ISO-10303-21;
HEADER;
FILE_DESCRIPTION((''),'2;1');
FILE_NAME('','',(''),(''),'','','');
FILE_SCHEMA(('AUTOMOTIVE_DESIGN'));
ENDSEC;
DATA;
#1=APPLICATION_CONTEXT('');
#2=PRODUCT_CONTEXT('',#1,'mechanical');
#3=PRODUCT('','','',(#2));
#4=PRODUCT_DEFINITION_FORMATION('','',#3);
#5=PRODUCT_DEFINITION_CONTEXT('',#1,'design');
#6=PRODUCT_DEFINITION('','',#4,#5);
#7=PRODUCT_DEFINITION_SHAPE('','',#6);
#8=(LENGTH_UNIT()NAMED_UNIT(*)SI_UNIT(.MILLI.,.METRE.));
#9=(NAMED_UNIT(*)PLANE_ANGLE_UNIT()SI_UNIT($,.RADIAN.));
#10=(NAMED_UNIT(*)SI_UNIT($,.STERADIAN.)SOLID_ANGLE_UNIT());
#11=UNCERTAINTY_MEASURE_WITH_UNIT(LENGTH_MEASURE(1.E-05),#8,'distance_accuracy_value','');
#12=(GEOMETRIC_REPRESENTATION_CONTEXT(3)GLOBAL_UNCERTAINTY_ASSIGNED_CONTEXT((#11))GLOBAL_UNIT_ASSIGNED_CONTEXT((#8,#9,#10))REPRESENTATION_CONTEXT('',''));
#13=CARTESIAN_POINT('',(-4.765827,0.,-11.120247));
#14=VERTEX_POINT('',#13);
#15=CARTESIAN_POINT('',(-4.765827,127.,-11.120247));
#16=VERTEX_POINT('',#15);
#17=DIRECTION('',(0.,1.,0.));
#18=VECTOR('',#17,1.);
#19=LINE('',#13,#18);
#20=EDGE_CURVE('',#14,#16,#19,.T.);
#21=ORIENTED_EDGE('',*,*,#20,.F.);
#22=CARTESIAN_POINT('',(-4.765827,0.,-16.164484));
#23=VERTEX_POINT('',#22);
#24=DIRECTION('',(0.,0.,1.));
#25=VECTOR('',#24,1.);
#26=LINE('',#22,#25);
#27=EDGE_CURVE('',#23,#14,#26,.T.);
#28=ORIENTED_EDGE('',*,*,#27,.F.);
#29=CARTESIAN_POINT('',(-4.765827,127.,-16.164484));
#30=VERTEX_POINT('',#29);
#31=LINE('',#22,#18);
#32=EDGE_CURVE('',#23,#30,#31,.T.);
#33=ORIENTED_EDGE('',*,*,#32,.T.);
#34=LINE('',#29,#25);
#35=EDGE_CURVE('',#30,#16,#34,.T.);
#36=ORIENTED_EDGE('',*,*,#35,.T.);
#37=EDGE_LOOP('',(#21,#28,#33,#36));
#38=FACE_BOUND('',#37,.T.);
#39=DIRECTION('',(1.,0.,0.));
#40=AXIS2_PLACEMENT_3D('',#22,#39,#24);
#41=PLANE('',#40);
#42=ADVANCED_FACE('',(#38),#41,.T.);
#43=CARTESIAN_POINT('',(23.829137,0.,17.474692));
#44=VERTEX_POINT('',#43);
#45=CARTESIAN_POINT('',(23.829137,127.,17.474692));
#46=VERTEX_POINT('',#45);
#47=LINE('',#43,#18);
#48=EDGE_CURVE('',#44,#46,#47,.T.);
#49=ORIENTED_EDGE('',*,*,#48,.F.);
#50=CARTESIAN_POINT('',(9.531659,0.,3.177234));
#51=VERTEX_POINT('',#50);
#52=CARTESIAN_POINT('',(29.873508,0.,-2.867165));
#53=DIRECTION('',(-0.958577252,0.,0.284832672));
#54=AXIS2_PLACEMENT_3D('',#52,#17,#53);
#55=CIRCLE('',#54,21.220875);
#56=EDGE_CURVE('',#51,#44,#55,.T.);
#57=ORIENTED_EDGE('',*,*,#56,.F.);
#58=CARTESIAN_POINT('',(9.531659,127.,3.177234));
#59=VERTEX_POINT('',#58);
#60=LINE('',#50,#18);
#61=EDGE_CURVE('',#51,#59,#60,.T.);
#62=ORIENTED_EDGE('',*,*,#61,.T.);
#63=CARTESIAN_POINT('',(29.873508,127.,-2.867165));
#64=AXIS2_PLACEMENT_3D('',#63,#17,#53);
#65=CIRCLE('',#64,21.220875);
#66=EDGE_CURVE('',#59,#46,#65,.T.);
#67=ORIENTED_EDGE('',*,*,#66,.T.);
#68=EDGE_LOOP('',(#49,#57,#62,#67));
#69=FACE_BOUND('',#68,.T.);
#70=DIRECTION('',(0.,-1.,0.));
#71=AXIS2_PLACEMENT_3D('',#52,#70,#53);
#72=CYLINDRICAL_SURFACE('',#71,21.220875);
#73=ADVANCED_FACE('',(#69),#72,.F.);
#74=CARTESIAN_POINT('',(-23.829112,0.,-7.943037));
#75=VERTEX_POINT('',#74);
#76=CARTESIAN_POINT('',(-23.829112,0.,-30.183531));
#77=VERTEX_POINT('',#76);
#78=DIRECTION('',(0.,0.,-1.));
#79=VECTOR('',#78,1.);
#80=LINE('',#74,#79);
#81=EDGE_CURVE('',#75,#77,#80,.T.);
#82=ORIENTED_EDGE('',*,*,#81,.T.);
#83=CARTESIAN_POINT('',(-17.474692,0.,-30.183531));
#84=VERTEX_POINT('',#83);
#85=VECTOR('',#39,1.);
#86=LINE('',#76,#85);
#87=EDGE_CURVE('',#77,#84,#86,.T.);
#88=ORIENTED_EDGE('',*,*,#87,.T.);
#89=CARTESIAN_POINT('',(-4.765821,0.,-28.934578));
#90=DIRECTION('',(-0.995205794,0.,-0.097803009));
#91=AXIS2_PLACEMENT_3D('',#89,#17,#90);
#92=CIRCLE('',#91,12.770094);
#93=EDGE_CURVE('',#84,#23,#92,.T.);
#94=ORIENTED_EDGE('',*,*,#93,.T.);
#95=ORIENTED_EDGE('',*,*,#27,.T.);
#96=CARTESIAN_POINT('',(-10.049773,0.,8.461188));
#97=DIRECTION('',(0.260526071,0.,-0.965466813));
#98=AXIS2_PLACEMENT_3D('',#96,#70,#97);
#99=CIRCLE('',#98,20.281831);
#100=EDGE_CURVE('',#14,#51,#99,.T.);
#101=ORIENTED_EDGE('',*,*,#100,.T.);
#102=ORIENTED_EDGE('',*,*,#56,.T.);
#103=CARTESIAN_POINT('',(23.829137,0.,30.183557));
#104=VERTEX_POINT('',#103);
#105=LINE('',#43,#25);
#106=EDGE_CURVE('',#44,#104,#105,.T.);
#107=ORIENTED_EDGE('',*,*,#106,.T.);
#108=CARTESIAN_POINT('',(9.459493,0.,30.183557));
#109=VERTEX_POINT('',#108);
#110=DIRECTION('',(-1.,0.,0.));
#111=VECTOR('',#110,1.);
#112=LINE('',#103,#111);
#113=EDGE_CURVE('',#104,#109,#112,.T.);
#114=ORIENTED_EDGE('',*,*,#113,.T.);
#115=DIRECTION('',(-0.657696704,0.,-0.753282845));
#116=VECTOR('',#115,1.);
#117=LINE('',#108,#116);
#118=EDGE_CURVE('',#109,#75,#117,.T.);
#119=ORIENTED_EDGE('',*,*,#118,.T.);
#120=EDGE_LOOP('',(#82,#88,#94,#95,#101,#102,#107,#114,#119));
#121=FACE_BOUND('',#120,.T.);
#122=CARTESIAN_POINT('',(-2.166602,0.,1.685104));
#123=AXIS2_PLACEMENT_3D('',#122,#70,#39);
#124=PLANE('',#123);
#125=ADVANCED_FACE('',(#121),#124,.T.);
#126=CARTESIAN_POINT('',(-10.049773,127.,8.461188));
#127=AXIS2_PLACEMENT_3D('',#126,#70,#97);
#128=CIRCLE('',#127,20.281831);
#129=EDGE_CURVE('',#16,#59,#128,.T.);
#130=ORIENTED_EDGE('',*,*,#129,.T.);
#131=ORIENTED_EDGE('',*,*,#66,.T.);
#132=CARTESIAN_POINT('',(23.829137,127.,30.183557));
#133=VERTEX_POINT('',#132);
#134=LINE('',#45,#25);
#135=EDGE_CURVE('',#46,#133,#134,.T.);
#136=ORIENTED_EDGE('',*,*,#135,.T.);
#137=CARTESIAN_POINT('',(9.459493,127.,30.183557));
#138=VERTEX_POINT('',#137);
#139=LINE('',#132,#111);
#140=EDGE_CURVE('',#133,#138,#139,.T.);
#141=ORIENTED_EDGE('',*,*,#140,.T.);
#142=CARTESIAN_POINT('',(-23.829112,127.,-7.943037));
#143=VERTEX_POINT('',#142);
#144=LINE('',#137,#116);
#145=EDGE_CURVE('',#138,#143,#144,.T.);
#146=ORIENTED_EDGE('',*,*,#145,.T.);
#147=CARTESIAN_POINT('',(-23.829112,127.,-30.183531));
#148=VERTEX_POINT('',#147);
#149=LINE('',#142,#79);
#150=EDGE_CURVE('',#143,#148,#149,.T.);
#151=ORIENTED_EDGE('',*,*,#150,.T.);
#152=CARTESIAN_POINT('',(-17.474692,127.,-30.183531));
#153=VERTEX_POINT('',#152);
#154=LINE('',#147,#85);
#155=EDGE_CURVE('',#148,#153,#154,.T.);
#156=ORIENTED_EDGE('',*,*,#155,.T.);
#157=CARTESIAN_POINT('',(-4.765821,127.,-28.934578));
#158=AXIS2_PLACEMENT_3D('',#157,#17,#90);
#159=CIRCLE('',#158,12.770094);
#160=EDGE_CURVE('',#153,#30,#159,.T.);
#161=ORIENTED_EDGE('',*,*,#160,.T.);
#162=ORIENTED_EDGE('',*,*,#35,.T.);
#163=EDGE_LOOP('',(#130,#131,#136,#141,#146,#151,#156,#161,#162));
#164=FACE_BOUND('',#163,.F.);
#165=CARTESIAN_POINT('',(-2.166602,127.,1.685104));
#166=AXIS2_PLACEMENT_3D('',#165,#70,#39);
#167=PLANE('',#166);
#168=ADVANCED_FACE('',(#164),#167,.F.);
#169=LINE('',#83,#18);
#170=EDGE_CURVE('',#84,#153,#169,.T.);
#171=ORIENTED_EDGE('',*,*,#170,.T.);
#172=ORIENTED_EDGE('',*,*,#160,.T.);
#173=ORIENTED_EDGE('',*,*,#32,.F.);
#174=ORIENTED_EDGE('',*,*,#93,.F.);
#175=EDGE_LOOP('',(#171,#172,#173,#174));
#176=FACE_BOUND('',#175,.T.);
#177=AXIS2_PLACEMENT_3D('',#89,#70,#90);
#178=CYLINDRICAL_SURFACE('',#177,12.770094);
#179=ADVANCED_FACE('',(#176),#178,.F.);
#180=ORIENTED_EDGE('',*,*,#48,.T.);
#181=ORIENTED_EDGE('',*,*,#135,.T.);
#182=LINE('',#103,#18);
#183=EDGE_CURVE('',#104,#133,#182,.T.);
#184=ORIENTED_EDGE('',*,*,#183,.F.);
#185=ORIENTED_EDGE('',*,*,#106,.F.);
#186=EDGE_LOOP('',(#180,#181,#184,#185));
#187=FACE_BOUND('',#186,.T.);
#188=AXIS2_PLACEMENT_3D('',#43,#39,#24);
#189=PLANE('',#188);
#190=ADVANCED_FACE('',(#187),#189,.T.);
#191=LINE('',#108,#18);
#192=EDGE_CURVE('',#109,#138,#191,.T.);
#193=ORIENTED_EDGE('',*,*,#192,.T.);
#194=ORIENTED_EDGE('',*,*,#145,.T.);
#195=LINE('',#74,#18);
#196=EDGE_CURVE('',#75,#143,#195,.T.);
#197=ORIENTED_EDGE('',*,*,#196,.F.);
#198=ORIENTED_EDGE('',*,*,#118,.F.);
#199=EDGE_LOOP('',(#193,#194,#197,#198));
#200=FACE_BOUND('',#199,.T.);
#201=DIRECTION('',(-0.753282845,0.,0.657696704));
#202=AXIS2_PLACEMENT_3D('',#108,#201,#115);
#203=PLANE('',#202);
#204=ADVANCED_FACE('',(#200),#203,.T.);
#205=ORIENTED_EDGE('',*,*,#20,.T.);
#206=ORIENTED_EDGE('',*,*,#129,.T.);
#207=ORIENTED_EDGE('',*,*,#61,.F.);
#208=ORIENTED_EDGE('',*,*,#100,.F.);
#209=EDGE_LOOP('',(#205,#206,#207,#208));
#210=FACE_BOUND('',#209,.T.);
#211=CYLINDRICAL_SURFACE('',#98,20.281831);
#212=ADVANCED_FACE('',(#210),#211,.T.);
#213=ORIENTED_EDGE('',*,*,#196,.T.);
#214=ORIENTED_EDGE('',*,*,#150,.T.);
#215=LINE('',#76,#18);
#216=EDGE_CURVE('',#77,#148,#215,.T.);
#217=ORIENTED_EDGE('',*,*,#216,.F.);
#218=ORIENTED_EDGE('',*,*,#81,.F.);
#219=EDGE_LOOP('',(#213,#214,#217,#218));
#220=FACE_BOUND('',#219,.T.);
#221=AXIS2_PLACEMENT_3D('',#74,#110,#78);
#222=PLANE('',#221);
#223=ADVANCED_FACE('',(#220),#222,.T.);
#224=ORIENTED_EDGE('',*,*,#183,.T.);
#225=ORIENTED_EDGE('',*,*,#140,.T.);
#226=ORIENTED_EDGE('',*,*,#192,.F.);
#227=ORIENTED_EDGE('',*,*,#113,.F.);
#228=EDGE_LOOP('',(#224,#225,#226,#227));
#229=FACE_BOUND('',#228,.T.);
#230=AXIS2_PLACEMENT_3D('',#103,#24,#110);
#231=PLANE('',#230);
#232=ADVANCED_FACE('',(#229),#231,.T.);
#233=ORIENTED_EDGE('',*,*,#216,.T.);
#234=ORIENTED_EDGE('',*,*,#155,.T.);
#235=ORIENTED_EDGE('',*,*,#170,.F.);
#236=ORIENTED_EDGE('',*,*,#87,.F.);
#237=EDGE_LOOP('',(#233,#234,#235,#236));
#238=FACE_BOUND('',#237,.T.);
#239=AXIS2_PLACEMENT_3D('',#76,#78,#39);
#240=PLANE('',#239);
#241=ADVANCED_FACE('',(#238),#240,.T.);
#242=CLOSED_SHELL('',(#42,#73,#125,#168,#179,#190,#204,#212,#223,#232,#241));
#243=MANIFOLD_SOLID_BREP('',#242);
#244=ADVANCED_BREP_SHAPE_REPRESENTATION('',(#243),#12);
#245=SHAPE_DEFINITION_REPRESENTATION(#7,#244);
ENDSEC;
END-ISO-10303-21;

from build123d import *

# Parameters (mm, degrees)
F1_DEPTH = 127


# Not quite as in the source:
# - ends of sketch curves that miss each other by under 0.0002 mm in the source are joined


with BuildPart() as f1:
    # F0 (on Front) → F1 (new body)
    with BuildSketch(Plane.XZ):
        with BuildLine():
            Line((23.829137, 17.474692), (23.829137, 30.1835566))
            Line((23.829137, 30.1835566), (9.4594934, 30.1835566))
            Line((9.4594934, 30.1835566), (-23.8291116, -7.9430372))
            Line((-23.8291116, -7.9430372), (-23.8291116, -30.1835312))
            Line((-23.8291116, -30.1835312), (-17.474692, -30.1835312))
            ThreePointArc((-17.474692, -30.1835312), (-14.2269141432, -20.357689713), (-4.7658274, -16.1644838))
            Line((-4.7658274, -16.1644838), (-4.7658274, -11.120247))
            ThreePointArc((-4.7658274, -11.120247), (4.2916437043, -5.8802359043), (9.5316594554, 3.1772339438))
            ThreePointArc((9.5316594554, 3.1772339438), (14.8680934033, 12.1382706133), (23.829137, 17.474692))
        make_face()
    extrude(amount=-F1_DEPTH)


solid = f1.part
